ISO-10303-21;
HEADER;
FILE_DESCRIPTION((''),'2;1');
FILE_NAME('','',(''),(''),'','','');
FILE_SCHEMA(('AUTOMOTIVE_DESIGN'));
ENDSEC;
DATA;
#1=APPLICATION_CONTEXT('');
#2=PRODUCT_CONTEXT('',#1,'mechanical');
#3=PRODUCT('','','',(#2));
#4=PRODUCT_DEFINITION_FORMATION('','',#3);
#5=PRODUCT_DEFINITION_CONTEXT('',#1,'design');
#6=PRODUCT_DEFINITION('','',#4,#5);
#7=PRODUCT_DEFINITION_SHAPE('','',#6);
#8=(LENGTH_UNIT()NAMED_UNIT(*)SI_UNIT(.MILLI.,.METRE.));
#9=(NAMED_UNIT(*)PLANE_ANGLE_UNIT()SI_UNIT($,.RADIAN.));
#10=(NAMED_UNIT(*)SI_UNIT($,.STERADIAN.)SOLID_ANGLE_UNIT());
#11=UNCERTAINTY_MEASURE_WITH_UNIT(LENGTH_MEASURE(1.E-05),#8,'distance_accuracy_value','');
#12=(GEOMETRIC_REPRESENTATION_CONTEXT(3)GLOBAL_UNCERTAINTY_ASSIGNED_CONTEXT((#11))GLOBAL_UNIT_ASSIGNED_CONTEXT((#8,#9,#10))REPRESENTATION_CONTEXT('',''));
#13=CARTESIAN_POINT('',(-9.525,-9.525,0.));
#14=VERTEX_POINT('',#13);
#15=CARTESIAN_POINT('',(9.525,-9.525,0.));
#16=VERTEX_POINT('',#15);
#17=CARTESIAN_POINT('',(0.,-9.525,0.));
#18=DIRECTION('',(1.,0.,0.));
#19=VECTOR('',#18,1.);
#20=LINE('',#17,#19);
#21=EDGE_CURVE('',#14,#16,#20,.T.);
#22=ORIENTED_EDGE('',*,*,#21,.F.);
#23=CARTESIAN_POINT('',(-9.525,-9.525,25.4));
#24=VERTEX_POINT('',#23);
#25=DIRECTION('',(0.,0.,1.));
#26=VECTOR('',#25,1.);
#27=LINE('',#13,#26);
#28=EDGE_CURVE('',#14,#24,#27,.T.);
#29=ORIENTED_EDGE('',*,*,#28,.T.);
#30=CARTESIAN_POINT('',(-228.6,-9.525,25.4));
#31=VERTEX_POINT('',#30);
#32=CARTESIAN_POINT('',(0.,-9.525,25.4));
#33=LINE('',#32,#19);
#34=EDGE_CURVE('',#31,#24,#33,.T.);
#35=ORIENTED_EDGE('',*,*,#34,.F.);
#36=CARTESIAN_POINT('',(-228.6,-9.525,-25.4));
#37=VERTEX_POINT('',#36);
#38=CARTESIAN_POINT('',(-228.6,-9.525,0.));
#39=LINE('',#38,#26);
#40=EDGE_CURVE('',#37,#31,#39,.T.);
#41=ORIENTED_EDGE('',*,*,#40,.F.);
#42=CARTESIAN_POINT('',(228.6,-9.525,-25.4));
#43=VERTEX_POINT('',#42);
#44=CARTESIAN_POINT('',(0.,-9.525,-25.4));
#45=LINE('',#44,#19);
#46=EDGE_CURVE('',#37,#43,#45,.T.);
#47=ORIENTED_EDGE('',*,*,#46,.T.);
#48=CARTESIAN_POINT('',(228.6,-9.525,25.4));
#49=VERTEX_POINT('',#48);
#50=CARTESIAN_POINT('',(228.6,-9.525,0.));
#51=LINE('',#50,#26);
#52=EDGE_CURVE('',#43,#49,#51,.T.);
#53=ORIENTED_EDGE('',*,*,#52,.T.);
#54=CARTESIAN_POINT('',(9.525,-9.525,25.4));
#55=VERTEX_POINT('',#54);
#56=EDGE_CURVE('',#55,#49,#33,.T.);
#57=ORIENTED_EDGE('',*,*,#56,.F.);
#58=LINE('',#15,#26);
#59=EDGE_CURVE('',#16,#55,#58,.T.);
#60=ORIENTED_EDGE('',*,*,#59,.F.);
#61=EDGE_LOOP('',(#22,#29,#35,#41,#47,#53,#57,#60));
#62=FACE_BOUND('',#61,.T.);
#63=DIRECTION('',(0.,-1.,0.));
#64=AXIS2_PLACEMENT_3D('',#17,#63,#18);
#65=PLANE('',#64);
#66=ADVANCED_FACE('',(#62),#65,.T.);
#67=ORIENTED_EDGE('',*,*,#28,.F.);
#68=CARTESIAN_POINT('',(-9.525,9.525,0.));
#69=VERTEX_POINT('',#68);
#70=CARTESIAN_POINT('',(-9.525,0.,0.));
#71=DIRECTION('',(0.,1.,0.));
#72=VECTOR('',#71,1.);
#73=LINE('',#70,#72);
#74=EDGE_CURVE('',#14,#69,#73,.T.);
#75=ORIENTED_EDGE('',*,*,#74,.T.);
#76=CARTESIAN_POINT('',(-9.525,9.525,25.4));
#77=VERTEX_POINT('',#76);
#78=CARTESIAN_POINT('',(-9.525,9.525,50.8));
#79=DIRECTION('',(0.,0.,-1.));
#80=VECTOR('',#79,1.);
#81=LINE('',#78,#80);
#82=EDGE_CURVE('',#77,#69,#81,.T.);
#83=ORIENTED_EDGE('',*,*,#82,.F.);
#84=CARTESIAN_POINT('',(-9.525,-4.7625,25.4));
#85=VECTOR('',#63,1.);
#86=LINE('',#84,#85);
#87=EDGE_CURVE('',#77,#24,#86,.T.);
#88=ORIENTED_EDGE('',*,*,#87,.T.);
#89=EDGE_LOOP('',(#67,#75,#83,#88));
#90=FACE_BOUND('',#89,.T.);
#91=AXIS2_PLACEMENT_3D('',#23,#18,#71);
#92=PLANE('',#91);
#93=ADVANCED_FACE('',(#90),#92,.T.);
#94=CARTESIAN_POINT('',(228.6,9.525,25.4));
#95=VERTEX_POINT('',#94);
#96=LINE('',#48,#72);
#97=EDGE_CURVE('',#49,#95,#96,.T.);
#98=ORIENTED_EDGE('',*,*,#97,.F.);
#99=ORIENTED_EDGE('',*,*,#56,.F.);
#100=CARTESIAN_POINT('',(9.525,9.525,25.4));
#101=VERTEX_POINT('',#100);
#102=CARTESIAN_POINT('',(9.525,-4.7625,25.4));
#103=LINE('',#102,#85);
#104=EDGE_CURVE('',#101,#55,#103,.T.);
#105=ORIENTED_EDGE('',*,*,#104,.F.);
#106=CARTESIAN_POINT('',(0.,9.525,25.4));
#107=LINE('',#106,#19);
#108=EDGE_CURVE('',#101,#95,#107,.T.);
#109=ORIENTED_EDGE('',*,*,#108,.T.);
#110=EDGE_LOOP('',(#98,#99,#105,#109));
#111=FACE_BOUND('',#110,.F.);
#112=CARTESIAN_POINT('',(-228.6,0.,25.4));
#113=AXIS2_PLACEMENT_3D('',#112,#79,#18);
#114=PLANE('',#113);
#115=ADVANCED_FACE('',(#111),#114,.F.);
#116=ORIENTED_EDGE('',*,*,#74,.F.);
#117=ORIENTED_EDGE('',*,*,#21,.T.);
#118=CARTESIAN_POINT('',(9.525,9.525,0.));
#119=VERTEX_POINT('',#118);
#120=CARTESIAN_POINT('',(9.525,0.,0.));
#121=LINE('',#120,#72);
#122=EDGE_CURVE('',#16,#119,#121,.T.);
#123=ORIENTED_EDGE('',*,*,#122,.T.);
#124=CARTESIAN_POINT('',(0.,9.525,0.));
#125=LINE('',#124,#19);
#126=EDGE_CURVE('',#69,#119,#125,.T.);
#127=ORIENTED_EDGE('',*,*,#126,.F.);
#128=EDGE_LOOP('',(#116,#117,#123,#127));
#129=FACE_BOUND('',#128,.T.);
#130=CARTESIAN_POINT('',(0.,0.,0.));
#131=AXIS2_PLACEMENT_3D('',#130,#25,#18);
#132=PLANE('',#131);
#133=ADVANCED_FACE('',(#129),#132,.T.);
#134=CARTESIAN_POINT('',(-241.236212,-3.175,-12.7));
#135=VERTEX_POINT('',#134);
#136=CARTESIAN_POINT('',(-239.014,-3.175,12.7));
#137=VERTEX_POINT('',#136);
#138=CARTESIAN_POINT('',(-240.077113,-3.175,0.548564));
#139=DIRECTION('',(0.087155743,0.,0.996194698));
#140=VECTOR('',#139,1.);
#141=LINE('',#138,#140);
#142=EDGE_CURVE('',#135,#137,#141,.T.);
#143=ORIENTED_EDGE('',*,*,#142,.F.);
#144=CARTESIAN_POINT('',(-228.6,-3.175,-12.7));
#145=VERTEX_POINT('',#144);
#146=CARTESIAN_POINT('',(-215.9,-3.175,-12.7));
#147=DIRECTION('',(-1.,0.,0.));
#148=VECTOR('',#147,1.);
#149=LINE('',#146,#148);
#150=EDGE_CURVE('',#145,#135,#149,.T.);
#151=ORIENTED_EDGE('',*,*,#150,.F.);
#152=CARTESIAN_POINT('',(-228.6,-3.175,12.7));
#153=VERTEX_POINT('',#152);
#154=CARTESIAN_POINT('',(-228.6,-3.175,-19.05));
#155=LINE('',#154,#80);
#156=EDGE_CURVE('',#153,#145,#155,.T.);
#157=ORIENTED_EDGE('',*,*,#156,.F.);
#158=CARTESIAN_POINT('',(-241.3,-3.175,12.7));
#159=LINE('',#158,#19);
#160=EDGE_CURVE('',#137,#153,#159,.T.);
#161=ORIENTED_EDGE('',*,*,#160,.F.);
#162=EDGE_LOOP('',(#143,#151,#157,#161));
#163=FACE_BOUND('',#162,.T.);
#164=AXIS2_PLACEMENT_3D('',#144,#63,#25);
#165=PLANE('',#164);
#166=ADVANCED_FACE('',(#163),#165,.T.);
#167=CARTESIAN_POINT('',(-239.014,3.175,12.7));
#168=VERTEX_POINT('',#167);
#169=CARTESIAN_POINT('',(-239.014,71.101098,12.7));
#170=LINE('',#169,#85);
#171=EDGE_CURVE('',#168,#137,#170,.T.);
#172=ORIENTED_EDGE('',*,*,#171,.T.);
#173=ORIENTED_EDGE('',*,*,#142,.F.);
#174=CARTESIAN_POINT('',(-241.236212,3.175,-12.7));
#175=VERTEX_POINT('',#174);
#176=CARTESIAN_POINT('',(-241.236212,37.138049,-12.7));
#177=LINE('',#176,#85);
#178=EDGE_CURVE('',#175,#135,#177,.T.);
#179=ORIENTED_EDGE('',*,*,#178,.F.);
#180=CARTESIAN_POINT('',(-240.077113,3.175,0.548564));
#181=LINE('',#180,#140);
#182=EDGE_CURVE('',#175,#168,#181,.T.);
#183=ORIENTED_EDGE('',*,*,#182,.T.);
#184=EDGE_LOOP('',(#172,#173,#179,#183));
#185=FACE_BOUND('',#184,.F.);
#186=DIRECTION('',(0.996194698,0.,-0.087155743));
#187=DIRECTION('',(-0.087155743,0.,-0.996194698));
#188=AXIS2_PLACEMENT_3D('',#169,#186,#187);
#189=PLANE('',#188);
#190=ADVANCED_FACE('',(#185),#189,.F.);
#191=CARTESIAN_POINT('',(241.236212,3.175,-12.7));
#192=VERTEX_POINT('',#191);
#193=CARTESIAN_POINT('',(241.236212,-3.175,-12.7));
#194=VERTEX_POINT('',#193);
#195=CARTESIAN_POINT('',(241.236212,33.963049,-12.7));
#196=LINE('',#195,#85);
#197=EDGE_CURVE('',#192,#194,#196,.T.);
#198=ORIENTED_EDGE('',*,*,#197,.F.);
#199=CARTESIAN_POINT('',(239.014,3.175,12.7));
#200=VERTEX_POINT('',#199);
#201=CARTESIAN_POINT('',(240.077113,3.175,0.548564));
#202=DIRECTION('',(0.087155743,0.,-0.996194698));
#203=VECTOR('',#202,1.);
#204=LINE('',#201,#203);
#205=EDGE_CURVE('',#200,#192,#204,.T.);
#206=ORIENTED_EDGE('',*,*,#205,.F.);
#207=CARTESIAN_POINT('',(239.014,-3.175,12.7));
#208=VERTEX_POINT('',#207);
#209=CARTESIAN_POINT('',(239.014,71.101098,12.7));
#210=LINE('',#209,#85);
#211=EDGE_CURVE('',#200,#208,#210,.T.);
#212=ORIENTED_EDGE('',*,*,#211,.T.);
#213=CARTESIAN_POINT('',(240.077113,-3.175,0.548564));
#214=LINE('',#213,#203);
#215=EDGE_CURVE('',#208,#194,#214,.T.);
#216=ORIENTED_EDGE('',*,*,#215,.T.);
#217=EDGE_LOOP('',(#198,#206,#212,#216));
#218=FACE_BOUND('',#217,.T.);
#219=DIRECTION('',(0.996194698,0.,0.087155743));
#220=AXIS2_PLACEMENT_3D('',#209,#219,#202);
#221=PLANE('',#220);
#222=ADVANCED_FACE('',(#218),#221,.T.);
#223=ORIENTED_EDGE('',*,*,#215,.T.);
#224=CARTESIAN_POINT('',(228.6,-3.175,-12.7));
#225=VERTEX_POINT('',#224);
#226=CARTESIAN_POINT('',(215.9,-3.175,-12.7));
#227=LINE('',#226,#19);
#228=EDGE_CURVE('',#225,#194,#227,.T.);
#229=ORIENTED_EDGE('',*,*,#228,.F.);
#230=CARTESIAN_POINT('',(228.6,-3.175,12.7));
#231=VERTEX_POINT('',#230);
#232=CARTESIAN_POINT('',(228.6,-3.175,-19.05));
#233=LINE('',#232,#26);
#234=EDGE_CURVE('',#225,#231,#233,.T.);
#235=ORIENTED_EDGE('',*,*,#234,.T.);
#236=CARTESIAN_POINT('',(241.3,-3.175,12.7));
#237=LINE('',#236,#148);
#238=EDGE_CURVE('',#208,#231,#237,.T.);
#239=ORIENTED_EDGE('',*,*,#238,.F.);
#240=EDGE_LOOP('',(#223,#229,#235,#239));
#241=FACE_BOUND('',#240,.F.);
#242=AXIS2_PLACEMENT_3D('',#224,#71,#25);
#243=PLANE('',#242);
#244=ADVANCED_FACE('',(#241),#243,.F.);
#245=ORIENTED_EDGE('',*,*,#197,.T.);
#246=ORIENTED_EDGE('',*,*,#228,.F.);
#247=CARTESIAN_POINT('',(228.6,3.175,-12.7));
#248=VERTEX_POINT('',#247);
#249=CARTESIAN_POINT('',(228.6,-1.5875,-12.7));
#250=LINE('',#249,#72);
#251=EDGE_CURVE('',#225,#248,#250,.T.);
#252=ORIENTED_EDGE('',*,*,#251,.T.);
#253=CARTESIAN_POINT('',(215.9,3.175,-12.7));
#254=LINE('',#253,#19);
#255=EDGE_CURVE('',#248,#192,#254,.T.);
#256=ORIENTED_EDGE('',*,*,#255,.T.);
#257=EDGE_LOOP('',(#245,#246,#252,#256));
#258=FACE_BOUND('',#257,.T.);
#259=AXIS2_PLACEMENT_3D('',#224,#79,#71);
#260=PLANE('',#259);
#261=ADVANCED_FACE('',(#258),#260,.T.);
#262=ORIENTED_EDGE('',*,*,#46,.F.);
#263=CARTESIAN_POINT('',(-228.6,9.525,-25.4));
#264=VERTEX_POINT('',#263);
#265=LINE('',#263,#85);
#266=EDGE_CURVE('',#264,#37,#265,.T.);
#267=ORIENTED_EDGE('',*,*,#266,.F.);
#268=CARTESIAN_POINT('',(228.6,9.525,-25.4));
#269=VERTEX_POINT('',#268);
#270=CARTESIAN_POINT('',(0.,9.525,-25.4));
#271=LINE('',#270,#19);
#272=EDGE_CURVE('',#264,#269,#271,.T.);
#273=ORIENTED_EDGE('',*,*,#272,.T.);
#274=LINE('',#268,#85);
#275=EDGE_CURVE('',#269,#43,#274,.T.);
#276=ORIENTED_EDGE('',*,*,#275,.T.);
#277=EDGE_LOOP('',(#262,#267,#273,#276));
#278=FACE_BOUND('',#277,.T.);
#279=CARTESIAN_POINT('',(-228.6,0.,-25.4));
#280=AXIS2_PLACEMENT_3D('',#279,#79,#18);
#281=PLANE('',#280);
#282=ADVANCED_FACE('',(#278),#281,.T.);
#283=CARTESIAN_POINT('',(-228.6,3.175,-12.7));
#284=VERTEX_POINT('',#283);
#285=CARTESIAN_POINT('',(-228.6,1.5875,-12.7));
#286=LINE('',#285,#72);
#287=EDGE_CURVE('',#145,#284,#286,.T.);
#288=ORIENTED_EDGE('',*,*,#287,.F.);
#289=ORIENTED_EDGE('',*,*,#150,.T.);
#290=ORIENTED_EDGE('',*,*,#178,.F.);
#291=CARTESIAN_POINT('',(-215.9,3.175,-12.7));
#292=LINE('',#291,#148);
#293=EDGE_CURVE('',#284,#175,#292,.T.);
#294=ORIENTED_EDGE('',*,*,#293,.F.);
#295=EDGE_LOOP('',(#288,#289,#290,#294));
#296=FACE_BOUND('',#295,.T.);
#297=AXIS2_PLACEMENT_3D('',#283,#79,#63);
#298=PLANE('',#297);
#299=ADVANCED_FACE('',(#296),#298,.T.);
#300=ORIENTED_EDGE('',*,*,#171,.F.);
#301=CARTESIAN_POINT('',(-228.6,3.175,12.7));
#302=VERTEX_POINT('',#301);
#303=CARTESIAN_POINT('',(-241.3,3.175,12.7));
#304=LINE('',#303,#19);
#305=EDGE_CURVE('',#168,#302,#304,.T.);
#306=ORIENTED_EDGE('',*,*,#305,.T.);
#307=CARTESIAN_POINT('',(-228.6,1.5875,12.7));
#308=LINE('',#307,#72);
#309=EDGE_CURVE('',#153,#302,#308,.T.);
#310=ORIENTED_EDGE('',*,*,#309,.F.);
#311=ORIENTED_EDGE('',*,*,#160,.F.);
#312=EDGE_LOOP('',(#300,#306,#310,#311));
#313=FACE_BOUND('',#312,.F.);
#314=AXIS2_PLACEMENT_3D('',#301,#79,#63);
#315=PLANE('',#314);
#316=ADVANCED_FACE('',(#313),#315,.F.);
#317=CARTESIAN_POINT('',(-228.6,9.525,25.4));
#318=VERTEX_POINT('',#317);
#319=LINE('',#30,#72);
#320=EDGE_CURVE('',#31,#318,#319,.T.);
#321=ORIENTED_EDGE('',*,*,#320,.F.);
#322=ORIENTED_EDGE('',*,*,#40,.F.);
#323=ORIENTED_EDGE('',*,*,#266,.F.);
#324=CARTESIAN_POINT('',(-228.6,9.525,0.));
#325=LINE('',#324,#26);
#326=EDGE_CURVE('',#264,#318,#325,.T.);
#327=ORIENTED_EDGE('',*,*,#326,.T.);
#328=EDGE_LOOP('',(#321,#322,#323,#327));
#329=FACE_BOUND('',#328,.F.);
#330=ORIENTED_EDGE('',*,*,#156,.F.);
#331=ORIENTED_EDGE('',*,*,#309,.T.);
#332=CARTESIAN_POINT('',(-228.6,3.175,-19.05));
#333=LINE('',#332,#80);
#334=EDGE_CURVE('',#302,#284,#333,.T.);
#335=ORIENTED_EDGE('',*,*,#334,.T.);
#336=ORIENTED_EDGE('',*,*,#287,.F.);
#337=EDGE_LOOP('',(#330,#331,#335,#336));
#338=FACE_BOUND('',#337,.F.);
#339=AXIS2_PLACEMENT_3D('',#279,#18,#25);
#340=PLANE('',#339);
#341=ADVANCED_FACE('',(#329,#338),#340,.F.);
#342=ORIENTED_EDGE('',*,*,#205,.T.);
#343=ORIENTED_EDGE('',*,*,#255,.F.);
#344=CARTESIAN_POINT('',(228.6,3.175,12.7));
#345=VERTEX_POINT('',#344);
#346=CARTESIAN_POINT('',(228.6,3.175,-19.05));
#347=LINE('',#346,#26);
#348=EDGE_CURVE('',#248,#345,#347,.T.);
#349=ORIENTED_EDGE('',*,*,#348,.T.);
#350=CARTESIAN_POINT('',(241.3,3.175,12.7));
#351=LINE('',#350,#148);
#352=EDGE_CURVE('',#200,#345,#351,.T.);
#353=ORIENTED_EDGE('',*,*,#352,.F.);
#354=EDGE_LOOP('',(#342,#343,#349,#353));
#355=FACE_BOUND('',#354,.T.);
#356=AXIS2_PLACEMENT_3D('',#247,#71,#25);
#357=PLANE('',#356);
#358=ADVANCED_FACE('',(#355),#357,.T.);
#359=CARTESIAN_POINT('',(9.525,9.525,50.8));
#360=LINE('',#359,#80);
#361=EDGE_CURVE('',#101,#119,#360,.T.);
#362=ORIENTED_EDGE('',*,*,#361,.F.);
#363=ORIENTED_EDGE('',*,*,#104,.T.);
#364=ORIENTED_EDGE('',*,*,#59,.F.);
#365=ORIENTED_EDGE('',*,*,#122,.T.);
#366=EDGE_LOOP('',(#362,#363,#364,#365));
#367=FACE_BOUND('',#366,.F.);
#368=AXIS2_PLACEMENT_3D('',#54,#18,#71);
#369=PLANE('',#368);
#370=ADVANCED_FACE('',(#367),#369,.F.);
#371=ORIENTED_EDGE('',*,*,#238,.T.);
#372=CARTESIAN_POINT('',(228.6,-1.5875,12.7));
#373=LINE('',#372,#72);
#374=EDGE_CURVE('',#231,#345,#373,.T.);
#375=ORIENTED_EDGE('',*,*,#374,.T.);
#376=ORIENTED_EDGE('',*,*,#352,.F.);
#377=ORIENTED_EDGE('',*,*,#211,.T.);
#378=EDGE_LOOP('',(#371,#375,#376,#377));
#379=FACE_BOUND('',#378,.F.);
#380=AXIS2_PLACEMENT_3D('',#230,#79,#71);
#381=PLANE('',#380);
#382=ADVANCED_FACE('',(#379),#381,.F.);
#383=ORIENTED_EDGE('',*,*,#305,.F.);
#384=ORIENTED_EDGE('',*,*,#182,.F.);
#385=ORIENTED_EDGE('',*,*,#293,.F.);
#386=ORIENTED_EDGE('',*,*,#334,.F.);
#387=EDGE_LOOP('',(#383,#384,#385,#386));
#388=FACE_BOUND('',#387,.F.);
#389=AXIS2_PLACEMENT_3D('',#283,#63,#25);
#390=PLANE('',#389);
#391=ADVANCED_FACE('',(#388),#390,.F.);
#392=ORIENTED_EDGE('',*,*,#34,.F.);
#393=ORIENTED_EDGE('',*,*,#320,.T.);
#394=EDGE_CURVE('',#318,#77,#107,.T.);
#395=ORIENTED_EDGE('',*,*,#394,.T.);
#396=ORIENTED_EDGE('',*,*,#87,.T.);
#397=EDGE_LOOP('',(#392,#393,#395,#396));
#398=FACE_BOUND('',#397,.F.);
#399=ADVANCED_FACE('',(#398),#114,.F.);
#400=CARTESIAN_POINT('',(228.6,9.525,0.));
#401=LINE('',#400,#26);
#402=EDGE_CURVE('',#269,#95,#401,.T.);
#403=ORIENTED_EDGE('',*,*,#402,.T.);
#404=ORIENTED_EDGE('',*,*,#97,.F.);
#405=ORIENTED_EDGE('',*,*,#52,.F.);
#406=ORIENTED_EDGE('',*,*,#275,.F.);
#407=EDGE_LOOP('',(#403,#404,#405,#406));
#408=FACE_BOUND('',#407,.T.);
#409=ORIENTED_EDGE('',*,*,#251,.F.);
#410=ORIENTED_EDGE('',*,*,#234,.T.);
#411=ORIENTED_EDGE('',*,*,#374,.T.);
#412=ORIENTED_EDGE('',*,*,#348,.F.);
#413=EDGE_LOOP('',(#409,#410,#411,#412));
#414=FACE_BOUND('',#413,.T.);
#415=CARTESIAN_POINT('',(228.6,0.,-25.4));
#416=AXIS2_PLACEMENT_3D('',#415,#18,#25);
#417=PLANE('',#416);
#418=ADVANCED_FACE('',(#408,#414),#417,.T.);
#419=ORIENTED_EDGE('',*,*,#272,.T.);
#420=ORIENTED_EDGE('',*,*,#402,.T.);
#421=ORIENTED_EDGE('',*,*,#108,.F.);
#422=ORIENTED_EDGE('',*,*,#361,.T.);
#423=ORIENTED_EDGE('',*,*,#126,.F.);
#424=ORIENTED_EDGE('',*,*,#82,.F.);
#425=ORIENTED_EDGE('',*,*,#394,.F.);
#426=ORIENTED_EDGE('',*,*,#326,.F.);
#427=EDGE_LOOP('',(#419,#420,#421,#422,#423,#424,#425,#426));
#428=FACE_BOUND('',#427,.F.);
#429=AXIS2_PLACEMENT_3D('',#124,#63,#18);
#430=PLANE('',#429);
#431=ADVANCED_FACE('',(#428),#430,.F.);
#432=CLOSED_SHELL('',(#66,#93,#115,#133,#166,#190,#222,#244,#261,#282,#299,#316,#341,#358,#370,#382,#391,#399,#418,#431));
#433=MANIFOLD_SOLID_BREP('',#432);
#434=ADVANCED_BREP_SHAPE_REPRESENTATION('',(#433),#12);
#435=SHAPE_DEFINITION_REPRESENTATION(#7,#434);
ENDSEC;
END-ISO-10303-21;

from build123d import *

# Parameters (mm, degrees)
F0_W        = 457.2
F0_H        = 50.8
F1_DEPTH    = 9.525
F2_W        = 19.05
F2_H        = 19.05
F3_DEPTH    = 25.4
F4_W        = 6.35
F4_H        = 25.4
F5_DEPTH    = 12.7
F6_W        = 6.35
F6_H        = 25.4
F7_DEPTH    = 12.7
F8_T1_DEPTH = 142.2021954046


# Not quite as in the source:
# - a fillet or chamfer that OpenCascade refuses, or shapes differently, is made with other operations: its cross-section is extruded or revolved along the edge and cut away or added
# - a feature names something its author has since deleted; it is built from what else it names


with BuildPart() as f1:
    # F0 (on Front) → F1 (new body, symmetric)
    with BuildSketch(Plane.XZ):
        Rectangle(F0_W, F0_H)
    extrude(amount=F1_DEPTH, both=True)

    # F2 (on face) → F3 (cut, symmetric)
    with BuildSketch(Plane.XY.offset(25.4)):
        Rectangle(F2_W, F2_H)
    extrude(amount=F3_DEPTH, both=True, mode=Mode.SUBTRACT)

    # F4 (on face) → F5 (join, symmetric)
    with BuildSketch(Plane.YZ.offset(228.6)):
        Rectangle(F4_W, F4_H)
    extrude(amount=F5_DEPTH, both=True)

    # F6 (on face) → F7 (join, symmetric)
    with BuildSketch(Plane(origin=(-228.6, 0, 0), x_dir=(0, -1, 0), z_dir=(-1, 0, 0))):
        Rectangle(F6_W, F6_H)
    extrude(amount=F7_DEPTH, both=True)

    # F8: chamfer of 2.286 x 26.1290995641 on 2 edges, made by hand

    # F8_s2 → F8_t1 (cut)
    with BuildSketch(Plane.XZ.offset(-71.1010977023)):
        Polygon((-239.014, 12.7), (-241.3, -13.4290995641), (-241.3, 12.7), align=None)
        Polygon((239.014, 12.7), (241.3, -13.4290995641), (241.3, 12.7), align=None)
    extrude(amount=F8_T1_DEPTH, mode=Mode.SUBTRACT)


solid = f1.part
